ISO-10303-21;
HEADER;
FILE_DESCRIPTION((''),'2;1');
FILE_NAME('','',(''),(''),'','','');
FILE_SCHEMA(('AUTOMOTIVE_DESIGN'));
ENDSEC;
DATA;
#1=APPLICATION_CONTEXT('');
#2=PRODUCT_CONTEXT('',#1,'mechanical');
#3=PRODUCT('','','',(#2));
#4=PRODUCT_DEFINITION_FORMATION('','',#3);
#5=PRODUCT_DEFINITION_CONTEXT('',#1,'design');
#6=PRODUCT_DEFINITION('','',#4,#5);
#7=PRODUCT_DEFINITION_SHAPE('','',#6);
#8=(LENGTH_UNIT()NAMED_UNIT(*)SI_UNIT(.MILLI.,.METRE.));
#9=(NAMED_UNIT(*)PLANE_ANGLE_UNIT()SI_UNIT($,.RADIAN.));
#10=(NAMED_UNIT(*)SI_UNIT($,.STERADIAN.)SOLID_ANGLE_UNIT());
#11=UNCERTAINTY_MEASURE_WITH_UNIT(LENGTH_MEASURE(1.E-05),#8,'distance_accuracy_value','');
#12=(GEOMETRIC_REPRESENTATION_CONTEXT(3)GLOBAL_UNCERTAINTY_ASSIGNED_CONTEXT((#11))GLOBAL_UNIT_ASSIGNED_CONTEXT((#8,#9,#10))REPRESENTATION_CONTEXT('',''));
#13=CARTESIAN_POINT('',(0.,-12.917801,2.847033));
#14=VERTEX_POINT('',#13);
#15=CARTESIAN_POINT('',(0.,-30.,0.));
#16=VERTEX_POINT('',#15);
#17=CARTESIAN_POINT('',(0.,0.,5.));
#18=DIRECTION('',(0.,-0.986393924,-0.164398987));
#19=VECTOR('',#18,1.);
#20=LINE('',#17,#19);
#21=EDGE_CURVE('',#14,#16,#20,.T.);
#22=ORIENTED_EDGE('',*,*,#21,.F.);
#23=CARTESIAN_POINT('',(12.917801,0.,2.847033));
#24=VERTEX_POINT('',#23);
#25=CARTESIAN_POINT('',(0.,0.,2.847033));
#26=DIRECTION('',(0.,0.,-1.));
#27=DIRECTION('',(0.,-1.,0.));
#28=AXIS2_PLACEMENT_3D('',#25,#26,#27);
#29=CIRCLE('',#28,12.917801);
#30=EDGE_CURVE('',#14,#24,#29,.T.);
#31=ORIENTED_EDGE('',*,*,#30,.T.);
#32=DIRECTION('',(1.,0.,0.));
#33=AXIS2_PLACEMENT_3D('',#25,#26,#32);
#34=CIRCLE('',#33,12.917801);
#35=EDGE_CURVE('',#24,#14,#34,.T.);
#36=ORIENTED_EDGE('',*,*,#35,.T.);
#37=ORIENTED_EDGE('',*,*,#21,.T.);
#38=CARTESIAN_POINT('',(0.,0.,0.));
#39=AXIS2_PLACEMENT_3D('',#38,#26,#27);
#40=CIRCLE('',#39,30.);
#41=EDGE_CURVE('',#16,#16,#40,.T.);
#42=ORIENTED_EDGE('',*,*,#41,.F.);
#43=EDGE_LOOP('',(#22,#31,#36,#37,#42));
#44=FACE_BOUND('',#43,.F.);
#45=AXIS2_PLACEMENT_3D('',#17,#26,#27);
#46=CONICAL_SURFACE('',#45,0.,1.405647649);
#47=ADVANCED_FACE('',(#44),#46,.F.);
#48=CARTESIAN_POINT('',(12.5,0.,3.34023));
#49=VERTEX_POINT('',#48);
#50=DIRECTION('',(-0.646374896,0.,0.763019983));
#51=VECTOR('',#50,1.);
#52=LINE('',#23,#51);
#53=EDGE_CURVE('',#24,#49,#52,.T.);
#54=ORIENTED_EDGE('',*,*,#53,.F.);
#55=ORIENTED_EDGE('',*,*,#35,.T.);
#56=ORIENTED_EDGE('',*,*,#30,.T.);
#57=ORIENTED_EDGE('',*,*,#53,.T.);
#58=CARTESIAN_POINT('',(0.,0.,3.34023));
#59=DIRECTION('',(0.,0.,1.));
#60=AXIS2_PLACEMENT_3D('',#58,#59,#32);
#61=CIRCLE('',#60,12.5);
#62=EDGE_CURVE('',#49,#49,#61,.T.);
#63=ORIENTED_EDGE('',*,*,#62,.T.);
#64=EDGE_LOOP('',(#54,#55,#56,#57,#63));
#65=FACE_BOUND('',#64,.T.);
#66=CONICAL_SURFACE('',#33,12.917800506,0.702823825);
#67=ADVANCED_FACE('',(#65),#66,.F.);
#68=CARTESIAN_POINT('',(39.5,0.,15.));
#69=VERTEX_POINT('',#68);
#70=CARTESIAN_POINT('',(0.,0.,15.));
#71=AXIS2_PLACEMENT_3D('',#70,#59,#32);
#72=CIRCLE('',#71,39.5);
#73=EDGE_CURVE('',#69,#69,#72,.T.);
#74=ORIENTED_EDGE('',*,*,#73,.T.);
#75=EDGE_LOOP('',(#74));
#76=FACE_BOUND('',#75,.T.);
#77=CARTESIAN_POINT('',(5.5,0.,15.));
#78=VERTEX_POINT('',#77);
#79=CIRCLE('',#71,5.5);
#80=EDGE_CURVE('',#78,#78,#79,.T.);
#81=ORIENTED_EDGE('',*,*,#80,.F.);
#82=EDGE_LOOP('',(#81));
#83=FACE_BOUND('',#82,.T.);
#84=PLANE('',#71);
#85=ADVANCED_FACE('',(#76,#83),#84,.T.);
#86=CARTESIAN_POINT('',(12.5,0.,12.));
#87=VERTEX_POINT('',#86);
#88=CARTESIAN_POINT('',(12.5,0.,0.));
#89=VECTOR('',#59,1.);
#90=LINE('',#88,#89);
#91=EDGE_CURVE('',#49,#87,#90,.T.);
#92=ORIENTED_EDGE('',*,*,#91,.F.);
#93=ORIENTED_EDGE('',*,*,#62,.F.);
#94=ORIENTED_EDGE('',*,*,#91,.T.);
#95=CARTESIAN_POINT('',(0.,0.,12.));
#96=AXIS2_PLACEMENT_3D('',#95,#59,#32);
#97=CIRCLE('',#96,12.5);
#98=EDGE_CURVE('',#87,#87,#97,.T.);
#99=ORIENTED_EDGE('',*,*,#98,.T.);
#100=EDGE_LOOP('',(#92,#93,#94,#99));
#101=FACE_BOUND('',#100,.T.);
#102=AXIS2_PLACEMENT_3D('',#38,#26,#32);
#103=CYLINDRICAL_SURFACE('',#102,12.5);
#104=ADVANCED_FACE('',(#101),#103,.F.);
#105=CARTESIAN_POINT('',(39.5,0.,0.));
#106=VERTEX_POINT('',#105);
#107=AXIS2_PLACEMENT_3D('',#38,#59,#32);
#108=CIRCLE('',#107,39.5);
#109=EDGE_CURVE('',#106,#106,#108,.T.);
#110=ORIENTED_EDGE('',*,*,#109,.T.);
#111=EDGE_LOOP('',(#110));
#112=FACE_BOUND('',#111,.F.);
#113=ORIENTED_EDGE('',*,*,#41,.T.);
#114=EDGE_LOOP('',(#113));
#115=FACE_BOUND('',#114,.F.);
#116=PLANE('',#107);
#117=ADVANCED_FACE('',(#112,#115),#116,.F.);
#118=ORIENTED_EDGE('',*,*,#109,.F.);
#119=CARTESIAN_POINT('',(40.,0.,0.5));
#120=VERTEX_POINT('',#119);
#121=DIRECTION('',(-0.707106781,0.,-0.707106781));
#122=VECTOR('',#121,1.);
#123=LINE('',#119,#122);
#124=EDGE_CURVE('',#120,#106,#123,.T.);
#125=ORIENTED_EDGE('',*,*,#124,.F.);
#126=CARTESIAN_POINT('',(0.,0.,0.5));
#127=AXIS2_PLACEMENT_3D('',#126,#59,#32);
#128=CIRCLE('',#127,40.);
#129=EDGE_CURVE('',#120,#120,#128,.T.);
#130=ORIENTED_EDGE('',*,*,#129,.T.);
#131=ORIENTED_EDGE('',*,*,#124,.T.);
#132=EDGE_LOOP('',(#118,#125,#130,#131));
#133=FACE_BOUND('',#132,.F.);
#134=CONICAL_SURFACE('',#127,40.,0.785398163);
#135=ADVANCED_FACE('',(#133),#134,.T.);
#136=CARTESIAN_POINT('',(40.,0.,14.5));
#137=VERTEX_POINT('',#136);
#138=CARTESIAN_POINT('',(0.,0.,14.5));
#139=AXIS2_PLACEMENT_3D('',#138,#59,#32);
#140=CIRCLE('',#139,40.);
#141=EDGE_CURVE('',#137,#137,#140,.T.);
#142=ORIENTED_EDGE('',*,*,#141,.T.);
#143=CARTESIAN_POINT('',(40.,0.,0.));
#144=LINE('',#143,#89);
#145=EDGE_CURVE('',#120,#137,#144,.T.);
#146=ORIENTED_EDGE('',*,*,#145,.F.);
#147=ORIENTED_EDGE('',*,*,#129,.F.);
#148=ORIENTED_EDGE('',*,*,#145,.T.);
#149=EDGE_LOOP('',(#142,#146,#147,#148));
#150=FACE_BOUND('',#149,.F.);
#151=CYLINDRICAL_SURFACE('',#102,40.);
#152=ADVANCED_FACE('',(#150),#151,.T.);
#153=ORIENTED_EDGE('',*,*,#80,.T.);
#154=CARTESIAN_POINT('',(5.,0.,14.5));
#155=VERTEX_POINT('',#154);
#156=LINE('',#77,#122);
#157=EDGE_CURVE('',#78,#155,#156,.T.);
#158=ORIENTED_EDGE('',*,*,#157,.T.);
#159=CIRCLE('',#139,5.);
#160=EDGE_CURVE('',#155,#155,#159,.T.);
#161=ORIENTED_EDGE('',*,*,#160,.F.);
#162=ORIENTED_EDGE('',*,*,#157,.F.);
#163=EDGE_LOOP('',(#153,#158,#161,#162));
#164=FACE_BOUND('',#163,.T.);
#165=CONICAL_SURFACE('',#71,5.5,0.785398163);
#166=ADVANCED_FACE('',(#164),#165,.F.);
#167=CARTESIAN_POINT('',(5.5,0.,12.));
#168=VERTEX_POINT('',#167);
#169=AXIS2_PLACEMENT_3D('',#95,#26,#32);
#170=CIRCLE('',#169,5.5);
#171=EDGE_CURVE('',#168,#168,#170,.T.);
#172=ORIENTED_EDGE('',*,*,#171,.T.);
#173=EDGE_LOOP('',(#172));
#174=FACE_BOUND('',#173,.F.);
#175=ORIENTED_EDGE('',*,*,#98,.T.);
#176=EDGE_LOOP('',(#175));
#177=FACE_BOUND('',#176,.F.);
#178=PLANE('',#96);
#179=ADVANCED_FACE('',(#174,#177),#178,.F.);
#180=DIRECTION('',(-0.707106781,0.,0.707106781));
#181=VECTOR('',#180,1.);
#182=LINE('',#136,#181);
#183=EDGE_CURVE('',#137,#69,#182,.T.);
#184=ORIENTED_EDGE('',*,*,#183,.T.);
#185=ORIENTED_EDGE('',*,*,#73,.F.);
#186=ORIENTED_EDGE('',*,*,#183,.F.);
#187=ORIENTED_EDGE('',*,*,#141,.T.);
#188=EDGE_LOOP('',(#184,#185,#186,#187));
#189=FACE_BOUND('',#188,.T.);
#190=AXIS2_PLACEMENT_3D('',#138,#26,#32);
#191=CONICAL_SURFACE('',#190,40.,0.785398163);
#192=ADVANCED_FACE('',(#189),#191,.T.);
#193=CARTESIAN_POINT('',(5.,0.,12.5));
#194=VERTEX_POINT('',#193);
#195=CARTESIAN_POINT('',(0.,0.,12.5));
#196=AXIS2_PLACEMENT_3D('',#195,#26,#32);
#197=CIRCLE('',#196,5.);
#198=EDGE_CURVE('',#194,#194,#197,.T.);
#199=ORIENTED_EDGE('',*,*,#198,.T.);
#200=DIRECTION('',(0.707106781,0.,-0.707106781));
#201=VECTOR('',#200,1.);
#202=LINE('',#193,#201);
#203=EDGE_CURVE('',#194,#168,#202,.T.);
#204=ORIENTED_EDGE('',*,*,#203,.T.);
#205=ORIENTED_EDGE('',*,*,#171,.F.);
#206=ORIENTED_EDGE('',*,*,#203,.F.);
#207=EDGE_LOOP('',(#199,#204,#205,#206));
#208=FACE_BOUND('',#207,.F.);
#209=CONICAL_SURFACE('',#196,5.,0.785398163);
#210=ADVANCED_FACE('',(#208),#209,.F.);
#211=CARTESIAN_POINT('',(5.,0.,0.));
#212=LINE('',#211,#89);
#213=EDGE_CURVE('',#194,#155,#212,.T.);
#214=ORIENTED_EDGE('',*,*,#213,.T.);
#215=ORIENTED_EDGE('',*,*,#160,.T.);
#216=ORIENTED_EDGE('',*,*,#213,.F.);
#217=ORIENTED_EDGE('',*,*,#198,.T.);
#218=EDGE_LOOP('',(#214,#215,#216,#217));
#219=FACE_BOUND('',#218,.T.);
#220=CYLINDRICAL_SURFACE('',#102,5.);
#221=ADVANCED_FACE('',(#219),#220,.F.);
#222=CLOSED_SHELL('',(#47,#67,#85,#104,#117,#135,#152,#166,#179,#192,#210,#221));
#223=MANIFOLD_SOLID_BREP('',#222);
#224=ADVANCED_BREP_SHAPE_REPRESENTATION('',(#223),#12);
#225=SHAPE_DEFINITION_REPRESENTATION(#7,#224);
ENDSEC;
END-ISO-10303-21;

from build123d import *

# Parameters (mm, degrees)
F0_R        = 40
F0_R_2      = 5
F1_DEPTH    = 15
F4_R        = 12.5
F5_DEPTH    = 12
F6_T6_ANGLE = 90
F6_T8_ANGLE = 270


# Not quite as in the source:
# - a fillet or chamfer that OpenCascade refuses, or shapes differently, is made with other operations: its cross-section is extruded or revolved along the edge and cut away or added


with BuildPart() as f1:
    # F0 (on Top) → F1 (new body)
    with BuildSketch(Plane.XY):
        Circle(F0_R)
        Circle(F0_R_2, mode=Mode.SUBTRACT)
    extrude(amount=F1_DEPTH)

    # F2 (on Right) → F3 (revolve, cut)
    with BuildSketch(Plane.YZ):
        Polygon((-30, 0), (0, 0), (0, 5), align=None)
    revolve(axis=Axis((0, 0, -3.8595963269), (0, 0, -1)), mode=Mode.SUBTRACT)

    # F4 (on Top) → F5 (cut)
    with BuildSketch(Plane.XY):
        Circle(F4_R)
    extrude(amount=F5_DEPTH, mode=Mode.SUBTRACT)

    # F6: chamfer of 0.5 on 6 edges, made by hand

    # F6_s1 → F6_t2 (revolve, cut)
    with BuildSketch(Plane.XZ):
        Polygon((40, 14.5), (39.5, 15), (40, 15), align=None)
    revolve(axis=Axis((0, 0, 15), (0, 0, 1)), mode=Mode.SUBTRACT)

    # F6_s3 → F6_t4 (revolve, cut)
    with BuildSketch(Plane.XZ):
        Polygon((40, 0.5), (39.5, 0), (40, 0), align=None)
    revolve(axis=Axis((0, 0, 0), (0, 0, 1)), mode=Mode.SUBTRACT)

    # F6_s5 → F6_t6 (revolve, cut)
    with BuildSketch(Plane.XZ):
        Polygon((12.9178005063, 2.8470332489), (12.5, 3.3402302109), (12.5, 2.9166666667), align=None)
    revolve(axis=Axis((0, 0, 2.9166666667), (0, 0, -1)), revolution_arc=F6_T6_ANGLE, mode=Mode.SUBTRACT)

    # F6_s7 → F6_t8 (revolve, cut)
    with BuildSketch(Plane.YZ):
        Polygon((-12.9178005063, 2.8470332489), (-12.5, 3.3402302109), (-12.5, 2.9166666667), align=None)
    revolve(axis=Axis((0, 0, 2.9166666667), (0, 0, -1)), revolution_arc=F6_T8_ANGLE, mode=Mode.SUBTRACT)

    # F6_s9 → F6_t10 (revolve, cut)
    with BuildSketch(Plane.XZ):
        Polygon((5, 12.5), (5.5, 12), (5, 12), align=None)
    revolve(axis=Axis((0, 0, 12), (0, 0, -1)), mode=Mode.SUBTRACT)

    # F6_s11 → F6_t12 (revolve, cut)
    with BuildSketch(Plane.XZ):
        Polygon((5.5, 15), (5, 14.5), (5, 15), align=None)
    revolve(axis=Axis((0, 0, 15), (0, 0, 1)), mode=Mode.SUBTRACT)


solid = f1.part
